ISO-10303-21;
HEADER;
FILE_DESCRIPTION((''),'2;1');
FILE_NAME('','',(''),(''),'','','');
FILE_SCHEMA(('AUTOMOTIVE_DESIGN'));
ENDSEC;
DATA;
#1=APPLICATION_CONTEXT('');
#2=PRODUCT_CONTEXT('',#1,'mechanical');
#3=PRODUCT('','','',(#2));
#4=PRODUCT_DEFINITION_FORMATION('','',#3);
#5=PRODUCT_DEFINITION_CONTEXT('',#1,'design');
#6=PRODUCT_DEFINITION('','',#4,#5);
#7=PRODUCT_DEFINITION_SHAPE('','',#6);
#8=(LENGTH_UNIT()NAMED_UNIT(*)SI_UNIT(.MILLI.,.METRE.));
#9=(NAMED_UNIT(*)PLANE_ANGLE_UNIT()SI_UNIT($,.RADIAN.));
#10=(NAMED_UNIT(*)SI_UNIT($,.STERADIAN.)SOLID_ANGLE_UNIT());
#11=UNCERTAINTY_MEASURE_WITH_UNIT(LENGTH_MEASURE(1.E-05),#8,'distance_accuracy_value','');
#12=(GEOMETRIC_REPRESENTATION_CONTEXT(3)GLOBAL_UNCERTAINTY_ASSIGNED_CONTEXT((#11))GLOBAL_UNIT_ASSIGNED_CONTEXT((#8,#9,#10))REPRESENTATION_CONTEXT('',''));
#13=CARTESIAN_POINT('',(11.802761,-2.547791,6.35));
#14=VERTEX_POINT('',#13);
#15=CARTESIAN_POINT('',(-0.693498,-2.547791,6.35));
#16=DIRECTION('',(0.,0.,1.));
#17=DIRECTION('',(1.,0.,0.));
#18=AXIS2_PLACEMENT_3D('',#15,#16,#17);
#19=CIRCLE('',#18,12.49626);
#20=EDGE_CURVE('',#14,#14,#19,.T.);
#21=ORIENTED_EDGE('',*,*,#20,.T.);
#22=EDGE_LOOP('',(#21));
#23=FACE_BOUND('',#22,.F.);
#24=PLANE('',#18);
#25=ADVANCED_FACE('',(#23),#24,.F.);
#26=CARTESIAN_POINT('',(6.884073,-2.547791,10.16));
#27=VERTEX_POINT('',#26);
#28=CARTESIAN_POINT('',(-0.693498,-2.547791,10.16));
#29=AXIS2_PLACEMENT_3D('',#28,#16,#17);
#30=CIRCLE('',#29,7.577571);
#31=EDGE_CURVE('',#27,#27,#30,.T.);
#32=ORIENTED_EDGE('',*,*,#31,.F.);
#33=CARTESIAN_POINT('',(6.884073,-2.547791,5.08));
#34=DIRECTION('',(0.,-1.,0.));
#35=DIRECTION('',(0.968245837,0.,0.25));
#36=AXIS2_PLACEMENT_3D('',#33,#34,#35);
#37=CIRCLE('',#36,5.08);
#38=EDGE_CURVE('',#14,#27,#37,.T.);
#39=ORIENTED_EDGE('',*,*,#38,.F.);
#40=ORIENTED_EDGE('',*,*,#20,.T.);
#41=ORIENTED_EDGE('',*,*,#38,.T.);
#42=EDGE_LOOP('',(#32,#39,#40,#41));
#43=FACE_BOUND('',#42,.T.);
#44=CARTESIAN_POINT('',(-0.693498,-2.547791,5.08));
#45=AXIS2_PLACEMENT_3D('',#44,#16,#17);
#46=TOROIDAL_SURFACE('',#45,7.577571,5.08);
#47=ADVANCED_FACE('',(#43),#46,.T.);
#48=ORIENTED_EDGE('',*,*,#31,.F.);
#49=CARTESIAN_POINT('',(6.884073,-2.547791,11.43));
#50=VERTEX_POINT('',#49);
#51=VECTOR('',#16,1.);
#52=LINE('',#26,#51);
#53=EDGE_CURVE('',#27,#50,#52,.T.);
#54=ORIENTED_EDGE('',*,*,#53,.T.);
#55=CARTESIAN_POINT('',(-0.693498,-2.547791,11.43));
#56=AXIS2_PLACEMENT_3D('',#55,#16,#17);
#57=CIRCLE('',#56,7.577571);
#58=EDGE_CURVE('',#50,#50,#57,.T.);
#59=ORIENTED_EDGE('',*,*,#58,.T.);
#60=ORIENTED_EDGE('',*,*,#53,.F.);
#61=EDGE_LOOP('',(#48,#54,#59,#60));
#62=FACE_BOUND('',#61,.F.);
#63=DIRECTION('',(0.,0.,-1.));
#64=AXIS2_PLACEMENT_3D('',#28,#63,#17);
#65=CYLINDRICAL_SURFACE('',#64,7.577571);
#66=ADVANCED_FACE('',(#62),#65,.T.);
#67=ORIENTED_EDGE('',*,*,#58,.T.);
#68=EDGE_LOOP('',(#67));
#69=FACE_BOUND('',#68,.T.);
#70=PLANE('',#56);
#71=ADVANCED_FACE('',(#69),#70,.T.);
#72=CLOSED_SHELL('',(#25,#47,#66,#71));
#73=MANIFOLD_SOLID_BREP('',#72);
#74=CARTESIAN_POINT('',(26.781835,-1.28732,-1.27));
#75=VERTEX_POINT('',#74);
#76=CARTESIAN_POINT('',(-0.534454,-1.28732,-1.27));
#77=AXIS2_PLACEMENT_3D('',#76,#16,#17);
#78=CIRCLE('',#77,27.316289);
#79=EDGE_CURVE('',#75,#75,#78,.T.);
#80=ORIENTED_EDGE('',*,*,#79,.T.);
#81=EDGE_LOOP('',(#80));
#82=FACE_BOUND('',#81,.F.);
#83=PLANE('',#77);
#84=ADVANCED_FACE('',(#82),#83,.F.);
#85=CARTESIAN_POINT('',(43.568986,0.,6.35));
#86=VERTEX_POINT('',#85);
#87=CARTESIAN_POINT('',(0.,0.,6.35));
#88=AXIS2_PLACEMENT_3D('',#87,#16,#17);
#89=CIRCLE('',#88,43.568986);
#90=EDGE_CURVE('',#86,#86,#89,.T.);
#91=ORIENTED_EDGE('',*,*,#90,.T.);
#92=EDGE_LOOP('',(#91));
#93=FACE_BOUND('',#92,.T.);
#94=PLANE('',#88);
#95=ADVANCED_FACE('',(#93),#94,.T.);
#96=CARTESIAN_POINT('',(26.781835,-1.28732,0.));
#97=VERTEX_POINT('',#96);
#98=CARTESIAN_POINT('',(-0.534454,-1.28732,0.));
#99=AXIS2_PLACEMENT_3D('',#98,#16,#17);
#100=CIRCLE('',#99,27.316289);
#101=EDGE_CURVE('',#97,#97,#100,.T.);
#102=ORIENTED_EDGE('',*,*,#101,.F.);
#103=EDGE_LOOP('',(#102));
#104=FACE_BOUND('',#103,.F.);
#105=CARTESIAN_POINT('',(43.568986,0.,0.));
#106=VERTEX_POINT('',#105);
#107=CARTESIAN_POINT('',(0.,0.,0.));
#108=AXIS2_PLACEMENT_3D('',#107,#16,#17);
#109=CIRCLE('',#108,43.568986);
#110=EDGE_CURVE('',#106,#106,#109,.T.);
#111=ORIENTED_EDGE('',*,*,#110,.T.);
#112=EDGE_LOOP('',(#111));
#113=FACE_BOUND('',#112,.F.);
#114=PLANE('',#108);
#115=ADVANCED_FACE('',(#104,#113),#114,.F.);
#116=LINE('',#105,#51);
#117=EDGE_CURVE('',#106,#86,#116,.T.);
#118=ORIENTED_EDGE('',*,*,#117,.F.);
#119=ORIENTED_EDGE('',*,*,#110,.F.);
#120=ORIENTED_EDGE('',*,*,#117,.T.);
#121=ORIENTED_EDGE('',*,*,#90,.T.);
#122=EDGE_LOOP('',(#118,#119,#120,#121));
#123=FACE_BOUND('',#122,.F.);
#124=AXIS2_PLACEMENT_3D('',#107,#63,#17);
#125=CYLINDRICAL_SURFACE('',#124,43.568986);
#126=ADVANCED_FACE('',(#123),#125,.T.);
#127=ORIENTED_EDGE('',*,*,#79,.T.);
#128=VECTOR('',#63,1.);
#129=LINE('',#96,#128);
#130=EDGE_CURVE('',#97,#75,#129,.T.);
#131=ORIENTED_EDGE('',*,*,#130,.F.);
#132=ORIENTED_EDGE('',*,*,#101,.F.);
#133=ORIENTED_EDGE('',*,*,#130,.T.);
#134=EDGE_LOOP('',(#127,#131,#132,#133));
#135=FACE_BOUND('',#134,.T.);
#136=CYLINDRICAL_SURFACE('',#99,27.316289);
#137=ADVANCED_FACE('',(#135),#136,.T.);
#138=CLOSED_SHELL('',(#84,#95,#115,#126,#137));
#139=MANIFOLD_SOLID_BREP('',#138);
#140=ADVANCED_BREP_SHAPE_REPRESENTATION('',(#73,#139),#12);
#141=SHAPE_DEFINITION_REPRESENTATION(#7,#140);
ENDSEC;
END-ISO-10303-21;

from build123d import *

# Parameters (mm, degrees)
F0_R     = 43.5689862092
F1_DEPTH = 6.35
F2_R     = 12.4962598147
F3_DEPTH = 3.81
F5_R     = 27.3162889884
F6_DEPTH = 1.27
F7_DEPTH = 1.27


# Not quite as in the source:
# - a fillet or chamfer that OpenCascade refuses, or shapes differently, is made with other operations: its cross-section is extruded or revolved along the edge and cut away or added


with BuildPart() as f1:
    # F0 (on Top) → F1 (new body)
    with BuildSketch(Plane.XY):
        Circle(F0_R)
    extrude(amount=F1_DEPTH)

    # F5 (on Top) → F6 (join)
    with BuildSketch(Plane.XY):
        with Locations((-0.5344543024, -1.2873198139)):
            Circle(F5_R)
    extrude(amount=-F6_DEPTH)


with BuildPart() as f3:
    # F2 (on face) → F3 (new body)
    with BuildSketch(Plane.XY.offset(6.35)):
        with Locations((-0.6934984121, -2.5477914605)):
            Circle(F2_R)
    extrude(amount=F3_DEPTH)

    # F4: fillet of radius 5.08 on 1 edges, made by hand

    # F4_s1 → F4_t2 (revolve, cut)
    with BuildSketch(Plane.XZ.offset(2.5477914605)):
        with BuildLine():
            ThreePointArc((11.8027614026, 6.35), (9.9949245263, 9.0960926284), (6.8840725529, 10.16))
            Line((6.8840725529, 10.16), (11.8027614026, 10.16))
            Line((11.8027614026, 10.16), (11.8027614026, 6.35))
        make_face()
    revolve(axis=Axis((-0.6934984121, -2.5477914605, 10.16), (0, 0, 1)), mode=Mode.SUBTRACT)

    # F7 (add): a face of the model
    f7_faces = [f3.faces().sort_by_distance(p)[0] for p in [
        (-0.6934984121, -2.5477914605, 10.16),
    ]]
    extrude(f7_faces, amount=F7_DEPTH)


solid = Compound([f1.part, f3.part])
